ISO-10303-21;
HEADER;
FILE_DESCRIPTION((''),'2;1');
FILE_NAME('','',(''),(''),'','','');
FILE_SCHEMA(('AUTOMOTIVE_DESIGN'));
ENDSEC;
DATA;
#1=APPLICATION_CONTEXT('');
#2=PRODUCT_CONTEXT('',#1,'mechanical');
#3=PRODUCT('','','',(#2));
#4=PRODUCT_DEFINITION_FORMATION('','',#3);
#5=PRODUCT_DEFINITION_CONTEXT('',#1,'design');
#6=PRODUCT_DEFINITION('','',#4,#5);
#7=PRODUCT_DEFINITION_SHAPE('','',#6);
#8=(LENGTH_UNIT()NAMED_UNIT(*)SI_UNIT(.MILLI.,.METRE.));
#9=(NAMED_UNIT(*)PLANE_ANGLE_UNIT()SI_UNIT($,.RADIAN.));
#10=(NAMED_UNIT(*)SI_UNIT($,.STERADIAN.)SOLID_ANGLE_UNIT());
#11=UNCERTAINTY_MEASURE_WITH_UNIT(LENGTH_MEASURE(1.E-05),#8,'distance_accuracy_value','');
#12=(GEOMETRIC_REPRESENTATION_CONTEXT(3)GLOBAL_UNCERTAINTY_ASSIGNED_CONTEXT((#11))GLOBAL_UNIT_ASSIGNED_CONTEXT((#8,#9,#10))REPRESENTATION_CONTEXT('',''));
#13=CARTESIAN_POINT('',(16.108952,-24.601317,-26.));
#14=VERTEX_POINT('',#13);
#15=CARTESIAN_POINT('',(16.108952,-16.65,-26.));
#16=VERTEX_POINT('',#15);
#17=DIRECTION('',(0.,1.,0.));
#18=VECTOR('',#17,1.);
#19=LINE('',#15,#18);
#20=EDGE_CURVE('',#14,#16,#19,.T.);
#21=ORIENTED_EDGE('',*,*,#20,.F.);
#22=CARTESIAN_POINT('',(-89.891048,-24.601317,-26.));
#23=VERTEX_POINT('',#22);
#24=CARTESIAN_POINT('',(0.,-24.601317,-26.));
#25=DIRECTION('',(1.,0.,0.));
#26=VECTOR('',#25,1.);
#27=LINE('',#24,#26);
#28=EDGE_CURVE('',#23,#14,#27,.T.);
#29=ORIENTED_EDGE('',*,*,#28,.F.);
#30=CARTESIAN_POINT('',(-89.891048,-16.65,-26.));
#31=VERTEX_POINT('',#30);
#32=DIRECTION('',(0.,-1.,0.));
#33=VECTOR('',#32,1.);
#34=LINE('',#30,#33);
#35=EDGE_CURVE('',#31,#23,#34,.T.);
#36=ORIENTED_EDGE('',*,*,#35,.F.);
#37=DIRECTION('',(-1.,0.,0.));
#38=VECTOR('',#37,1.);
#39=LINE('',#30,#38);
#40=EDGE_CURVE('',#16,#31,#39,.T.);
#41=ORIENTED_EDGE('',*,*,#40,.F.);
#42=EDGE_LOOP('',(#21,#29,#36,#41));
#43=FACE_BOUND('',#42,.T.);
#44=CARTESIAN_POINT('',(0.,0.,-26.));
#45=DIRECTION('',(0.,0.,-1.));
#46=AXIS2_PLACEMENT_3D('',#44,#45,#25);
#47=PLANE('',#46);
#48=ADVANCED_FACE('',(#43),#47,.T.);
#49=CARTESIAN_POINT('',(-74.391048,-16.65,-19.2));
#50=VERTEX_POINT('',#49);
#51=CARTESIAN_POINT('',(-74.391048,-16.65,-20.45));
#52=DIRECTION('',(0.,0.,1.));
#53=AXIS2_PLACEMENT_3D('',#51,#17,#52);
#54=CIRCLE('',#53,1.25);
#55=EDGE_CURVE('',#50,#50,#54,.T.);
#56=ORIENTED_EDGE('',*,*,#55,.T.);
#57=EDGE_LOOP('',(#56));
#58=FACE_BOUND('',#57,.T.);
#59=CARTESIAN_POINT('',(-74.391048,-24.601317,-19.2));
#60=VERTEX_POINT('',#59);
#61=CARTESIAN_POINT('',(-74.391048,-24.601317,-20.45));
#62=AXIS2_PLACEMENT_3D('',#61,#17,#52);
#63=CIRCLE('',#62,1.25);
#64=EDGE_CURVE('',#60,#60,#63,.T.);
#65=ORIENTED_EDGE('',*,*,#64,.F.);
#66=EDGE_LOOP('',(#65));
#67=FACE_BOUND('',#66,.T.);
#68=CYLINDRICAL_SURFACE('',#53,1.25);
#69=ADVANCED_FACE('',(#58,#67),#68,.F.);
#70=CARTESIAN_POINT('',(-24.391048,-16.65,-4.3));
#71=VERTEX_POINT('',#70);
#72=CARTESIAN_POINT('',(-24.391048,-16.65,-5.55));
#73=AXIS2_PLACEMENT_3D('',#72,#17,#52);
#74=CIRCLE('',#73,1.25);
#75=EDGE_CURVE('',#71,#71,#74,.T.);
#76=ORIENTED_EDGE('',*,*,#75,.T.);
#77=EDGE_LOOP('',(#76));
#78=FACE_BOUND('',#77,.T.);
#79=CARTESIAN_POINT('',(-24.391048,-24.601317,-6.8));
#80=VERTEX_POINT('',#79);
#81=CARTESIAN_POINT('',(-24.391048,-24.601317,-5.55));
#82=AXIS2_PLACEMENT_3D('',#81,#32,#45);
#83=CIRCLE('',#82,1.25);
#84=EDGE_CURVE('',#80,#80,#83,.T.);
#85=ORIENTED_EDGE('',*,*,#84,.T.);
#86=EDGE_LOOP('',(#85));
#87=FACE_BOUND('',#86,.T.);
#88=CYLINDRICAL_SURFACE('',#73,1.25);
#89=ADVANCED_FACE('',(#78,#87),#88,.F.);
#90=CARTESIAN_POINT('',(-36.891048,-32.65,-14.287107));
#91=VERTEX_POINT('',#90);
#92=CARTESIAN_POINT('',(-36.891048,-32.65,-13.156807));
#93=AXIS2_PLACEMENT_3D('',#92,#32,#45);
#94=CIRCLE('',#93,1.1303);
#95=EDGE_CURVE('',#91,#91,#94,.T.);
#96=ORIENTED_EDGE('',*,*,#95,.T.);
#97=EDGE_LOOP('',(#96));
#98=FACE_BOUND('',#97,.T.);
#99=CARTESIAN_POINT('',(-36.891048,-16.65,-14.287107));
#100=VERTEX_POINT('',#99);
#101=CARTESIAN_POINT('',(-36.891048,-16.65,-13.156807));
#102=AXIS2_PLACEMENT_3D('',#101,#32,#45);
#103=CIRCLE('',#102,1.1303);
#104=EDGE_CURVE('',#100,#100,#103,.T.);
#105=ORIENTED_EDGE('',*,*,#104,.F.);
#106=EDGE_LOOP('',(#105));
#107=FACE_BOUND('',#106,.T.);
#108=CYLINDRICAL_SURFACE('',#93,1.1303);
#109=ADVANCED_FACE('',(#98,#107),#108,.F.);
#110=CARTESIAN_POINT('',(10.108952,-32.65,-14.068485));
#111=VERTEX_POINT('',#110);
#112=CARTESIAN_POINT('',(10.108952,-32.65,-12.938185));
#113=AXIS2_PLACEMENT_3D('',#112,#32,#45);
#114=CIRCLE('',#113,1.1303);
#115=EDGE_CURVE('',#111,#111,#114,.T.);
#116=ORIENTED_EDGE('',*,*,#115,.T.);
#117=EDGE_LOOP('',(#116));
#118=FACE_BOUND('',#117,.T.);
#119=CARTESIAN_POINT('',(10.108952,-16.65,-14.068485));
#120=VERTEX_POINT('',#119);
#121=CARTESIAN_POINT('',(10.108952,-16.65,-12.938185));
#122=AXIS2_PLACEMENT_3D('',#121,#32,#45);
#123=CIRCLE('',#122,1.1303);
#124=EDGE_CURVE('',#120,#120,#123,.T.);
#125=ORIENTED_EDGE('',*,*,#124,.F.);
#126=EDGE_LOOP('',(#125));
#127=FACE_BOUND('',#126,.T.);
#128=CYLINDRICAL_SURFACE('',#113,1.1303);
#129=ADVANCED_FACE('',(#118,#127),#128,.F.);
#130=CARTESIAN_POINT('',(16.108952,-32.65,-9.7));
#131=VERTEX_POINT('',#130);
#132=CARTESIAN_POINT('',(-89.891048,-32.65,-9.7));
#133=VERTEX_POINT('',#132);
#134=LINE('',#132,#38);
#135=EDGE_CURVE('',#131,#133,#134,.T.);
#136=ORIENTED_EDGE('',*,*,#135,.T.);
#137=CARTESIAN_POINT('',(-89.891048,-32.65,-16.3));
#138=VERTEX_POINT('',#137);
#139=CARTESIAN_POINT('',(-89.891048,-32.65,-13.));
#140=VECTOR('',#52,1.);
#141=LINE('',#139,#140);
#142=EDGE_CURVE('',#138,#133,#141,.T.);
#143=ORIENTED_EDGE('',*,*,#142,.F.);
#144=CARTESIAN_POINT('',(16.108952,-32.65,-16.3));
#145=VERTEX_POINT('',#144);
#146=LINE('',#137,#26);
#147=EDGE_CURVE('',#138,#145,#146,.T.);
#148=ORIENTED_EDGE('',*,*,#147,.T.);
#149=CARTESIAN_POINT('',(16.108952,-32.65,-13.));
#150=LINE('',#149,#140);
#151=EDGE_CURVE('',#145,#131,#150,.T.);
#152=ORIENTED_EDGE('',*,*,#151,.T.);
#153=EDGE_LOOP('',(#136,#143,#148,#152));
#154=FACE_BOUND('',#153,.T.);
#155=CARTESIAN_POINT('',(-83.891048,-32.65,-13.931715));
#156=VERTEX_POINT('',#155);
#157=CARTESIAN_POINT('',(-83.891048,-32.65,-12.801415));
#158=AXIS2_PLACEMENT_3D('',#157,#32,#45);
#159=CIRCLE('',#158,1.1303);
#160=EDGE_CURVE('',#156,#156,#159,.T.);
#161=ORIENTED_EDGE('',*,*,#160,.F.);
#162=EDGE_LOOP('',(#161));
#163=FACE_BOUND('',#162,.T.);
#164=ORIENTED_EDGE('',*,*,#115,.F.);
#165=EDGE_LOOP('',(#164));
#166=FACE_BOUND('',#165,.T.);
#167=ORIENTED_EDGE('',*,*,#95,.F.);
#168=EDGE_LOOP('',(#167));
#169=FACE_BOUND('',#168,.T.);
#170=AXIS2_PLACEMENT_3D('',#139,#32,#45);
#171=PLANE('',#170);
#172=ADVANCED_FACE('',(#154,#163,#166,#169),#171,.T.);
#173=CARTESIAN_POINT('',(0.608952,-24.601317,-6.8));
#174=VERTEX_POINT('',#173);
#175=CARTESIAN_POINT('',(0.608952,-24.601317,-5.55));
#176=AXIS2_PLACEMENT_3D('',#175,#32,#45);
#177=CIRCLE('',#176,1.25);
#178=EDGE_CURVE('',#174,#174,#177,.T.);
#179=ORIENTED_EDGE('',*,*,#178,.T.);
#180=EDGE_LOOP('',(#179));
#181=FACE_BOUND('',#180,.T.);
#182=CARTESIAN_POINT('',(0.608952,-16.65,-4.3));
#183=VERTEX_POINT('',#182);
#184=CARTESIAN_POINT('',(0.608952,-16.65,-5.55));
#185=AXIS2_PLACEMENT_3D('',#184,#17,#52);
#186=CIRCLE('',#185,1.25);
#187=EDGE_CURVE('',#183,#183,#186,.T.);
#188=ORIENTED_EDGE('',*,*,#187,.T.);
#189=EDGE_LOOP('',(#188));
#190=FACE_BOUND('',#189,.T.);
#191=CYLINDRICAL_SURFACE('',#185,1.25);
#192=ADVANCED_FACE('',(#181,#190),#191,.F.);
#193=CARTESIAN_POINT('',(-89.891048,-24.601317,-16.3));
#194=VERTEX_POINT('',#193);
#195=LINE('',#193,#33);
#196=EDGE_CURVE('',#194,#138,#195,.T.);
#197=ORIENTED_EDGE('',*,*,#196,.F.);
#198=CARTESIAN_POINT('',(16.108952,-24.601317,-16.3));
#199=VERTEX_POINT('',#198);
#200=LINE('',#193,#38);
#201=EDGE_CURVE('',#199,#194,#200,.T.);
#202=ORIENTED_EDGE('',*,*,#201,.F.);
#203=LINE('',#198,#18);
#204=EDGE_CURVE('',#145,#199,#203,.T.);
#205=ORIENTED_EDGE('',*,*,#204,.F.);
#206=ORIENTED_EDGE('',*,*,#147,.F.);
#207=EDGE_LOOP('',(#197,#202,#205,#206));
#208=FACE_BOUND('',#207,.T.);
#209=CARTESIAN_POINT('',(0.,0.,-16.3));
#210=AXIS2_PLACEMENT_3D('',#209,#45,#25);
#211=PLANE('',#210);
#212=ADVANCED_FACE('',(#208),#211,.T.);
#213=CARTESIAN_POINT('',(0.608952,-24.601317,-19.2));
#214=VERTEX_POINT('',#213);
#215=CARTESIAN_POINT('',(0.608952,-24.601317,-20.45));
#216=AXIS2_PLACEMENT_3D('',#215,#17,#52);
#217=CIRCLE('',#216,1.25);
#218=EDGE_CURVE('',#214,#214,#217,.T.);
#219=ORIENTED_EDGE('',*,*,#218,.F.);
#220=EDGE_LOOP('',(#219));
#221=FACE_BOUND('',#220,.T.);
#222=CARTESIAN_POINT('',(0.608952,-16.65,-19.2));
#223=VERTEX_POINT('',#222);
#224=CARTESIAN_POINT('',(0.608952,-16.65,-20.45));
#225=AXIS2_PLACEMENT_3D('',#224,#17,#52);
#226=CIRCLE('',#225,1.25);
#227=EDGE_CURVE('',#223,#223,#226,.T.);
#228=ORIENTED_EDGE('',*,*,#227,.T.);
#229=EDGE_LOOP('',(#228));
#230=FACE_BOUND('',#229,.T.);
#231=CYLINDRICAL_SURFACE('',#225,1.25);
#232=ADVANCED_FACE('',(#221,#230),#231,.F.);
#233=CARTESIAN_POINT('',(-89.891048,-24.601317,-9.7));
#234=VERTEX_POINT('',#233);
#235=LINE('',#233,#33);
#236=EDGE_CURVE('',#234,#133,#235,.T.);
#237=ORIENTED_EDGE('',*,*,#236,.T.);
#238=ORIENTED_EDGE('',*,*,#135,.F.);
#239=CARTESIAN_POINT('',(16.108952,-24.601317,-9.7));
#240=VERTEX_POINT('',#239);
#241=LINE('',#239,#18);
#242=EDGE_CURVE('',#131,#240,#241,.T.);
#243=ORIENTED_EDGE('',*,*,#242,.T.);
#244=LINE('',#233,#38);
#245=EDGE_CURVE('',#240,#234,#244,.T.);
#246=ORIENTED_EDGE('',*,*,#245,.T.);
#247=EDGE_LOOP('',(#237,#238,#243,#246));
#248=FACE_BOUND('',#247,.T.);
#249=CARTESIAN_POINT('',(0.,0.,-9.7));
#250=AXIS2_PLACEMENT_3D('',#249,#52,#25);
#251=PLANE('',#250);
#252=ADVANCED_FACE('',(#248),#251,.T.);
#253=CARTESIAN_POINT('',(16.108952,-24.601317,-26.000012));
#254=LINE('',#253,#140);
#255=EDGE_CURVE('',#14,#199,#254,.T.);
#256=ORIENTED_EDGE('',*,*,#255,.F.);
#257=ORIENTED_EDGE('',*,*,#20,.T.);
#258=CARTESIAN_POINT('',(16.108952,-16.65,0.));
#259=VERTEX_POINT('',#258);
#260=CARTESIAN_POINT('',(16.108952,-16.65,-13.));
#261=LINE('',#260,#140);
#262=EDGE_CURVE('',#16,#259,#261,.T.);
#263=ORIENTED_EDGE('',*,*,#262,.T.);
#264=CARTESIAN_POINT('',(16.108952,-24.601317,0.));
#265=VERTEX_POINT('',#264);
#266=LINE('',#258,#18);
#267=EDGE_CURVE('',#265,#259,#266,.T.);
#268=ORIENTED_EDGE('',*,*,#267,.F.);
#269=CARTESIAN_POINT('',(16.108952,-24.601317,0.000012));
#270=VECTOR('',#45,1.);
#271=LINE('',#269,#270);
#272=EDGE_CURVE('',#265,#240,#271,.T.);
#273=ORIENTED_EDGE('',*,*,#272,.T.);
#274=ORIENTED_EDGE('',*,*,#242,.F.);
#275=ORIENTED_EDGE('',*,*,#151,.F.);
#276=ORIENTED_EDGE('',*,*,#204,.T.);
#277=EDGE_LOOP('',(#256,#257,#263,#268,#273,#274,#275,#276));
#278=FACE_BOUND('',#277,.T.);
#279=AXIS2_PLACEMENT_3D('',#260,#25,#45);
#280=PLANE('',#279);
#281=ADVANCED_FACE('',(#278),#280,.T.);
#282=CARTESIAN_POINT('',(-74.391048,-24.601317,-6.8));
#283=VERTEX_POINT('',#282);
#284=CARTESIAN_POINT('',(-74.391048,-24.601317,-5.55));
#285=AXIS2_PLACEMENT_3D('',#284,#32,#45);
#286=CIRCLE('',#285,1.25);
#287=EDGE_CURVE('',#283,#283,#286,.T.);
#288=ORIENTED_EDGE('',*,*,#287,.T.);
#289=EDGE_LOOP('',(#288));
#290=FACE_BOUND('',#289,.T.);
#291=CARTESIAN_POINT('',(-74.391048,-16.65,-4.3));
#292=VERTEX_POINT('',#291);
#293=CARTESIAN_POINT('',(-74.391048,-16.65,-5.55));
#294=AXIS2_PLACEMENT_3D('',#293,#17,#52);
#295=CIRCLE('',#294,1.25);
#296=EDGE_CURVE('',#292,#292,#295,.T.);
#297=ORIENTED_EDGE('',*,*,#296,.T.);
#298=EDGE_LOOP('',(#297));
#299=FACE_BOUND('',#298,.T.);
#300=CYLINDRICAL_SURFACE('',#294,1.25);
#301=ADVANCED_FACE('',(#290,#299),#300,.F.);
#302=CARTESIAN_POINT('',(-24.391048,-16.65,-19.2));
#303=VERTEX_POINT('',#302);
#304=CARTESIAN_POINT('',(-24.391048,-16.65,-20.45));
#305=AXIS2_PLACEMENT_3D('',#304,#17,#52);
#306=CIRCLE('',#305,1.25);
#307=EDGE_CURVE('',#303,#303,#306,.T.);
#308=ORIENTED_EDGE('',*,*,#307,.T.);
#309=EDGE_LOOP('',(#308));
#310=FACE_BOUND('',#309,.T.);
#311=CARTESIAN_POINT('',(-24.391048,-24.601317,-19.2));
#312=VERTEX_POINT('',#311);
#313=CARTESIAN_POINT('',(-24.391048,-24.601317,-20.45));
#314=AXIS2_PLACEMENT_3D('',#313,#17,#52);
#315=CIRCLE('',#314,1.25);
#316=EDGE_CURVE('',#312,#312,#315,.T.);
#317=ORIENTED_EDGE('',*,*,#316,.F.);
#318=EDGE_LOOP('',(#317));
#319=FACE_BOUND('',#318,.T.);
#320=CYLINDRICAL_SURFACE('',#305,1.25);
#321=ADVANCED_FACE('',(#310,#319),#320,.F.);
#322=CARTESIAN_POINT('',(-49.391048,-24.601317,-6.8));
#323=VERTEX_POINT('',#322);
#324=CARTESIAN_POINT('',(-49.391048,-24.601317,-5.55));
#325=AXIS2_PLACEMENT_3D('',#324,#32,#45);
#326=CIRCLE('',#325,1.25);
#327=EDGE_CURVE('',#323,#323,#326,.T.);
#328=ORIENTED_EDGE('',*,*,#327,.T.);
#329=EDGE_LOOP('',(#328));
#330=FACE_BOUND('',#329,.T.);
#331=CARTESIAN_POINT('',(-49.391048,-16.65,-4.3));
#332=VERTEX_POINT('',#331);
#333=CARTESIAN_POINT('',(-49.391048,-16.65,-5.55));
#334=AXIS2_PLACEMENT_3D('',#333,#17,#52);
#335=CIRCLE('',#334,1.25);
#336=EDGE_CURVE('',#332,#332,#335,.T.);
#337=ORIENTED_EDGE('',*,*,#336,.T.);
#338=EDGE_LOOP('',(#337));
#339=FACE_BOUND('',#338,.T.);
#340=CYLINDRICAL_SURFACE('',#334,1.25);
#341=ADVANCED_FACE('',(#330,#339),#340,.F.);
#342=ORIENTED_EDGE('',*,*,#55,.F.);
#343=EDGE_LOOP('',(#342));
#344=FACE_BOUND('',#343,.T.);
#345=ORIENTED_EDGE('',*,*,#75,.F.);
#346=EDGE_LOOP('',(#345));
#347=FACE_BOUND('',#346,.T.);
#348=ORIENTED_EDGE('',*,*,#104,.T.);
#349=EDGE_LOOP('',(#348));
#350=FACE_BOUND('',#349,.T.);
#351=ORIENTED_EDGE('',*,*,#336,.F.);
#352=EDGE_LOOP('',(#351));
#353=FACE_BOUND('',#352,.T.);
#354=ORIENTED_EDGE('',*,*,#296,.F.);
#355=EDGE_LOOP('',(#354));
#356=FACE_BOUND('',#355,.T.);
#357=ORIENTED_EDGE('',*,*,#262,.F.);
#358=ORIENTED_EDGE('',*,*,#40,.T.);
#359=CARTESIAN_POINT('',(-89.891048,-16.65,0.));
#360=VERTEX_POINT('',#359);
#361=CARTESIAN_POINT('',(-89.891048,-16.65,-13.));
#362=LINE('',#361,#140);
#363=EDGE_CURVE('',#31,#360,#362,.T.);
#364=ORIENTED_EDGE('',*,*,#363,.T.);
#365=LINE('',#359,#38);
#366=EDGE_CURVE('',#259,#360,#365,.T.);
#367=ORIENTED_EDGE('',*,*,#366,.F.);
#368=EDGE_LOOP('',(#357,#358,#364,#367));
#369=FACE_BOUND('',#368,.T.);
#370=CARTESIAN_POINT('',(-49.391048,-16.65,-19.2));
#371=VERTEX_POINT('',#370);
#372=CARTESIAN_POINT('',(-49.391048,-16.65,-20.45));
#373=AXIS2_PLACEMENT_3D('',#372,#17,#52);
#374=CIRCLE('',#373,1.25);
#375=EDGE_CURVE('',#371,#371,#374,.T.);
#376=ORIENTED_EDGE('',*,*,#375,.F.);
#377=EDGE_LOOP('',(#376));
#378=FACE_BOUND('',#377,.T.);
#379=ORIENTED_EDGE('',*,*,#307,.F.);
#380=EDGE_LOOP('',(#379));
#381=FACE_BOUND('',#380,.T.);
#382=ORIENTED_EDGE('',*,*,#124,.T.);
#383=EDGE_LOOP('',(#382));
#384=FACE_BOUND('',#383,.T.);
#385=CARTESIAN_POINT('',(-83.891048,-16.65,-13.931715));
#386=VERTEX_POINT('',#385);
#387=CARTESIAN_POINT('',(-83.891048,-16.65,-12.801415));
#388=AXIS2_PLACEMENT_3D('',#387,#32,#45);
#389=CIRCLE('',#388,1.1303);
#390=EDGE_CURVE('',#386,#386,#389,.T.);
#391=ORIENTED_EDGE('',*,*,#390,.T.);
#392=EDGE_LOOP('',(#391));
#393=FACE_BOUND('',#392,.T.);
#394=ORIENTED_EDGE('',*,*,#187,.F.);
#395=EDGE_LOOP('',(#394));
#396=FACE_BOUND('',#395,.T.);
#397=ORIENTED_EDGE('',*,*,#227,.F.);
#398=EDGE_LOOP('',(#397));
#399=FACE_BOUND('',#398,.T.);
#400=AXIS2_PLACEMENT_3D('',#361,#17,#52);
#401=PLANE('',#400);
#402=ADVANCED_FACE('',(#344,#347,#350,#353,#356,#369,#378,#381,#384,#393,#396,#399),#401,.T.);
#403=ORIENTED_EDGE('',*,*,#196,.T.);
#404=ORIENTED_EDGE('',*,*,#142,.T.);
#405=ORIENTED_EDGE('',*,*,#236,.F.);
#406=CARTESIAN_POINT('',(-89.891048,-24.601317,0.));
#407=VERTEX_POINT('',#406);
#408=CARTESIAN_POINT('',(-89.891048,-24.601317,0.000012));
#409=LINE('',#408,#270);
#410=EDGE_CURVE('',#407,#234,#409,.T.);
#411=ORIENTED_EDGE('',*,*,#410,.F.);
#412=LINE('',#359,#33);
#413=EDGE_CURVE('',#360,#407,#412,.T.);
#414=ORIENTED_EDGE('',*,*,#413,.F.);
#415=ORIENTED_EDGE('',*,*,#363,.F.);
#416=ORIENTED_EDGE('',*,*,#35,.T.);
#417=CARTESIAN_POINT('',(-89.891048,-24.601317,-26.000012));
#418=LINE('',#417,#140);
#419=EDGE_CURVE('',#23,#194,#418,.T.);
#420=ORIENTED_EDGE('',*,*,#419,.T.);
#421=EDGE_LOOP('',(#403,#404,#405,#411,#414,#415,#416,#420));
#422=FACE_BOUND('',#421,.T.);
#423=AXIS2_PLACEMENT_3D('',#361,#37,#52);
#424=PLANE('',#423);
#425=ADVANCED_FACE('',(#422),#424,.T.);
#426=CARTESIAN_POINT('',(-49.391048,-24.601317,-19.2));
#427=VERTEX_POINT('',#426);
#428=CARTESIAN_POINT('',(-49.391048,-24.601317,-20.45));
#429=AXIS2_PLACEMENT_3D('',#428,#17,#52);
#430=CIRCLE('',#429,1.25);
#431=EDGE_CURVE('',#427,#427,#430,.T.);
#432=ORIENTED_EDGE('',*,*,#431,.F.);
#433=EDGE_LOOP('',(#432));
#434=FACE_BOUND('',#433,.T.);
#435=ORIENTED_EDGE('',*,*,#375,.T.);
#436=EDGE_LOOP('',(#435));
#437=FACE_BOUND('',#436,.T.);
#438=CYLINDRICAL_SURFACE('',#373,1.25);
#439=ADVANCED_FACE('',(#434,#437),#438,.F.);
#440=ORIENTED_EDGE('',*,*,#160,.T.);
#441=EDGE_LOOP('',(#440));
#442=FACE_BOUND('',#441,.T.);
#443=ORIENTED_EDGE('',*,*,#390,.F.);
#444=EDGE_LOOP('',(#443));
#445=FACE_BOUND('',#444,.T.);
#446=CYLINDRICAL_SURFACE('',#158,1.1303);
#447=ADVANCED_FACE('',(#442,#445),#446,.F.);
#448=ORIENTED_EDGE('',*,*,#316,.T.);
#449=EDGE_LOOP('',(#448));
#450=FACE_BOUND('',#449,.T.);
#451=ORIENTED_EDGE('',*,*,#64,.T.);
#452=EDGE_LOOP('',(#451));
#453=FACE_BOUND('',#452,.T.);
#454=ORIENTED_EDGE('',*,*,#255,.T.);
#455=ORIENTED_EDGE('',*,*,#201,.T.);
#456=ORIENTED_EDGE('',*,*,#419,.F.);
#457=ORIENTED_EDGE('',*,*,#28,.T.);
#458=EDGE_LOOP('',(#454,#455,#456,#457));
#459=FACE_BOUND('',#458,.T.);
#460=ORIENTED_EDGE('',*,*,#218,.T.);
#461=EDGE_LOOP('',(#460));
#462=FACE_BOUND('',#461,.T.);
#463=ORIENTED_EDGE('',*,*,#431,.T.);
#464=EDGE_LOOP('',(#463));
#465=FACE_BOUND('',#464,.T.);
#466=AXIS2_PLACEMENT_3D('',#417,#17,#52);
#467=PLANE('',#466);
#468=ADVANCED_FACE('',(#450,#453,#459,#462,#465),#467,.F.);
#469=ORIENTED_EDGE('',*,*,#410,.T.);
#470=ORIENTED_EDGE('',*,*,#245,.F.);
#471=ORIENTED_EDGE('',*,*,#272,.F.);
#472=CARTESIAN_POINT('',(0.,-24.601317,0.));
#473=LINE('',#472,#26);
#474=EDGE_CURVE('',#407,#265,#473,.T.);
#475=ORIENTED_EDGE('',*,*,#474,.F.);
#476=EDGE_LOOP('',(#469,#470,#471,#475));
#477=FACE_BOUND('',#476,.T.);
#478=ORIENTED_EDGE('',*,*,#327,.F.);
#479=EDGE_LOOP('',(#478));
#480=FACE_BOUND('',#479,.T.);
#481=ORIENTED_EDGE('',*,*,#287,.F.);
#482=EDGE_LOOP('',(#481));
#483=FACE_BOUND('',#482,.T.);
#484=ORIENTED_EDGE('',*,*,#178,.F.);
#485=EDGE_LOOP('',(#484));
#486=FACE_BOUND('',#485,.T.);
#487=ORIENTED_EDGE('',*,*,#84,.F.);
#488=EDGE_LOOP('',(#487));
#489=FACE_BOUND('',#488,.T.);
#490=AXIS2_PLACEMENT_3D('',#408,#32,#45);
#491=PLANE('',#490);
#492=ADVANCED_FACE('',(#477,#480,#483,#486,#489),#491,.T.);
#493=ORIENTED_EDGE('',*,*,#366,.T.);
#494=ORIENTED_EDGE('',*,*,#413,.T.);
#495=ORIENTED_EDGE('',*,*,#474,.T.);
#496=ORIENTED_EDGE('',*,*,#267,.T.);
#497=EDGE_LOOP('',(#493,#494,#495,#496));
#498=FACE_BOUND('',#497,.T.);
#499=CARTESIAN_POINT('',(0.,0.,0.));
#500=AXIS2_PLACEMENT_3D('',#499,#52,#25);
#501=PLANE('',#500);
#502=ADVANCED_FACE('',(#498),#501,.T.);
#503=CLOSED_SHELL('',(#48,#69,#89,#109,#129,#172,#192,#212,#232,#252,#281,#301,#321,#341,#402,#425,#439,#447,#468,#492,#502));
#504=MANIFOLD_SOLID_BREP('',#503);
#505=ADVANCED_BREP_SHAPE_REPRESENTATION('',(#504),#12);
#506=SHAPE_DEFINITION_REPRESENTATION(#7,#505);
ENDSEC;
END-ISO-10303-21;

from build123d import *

# Parameters (mm, degrees)
SKETCH4_W                       = 106
SKETCH4_H                       = 16
BOSS_EXTRUDE2_DEPTH             = 13
CUT_EXTRUDE3_START              = -9.7
SKETCH25_W                      = 106
SKETCH25_H                      = 8.1
CUT_EXTRUDE3_DEPTH              = 107.216438698
M3X0_5_TAPPED_HOLE1_D           = 2.5
MIRROR1_START                   = -24.601316976
MIRROR1_OUTLINE_W               = 106
MIRROR1_OUTLINE_H               = 13
MIRROR1_OUTLINE_R               = 1.25
MIRROR1_DEPTH                   = 7.951316976
MIRROR1_START_2                 = -32.65
MIRROR1_2_OUTLINE_W             = 106
MIRROR1_2_OUTLINE_H             = 3.3
MIRROR1_2_DEPTH                 = 8.048683024
F_4_40_TAPPED_HOLE1_D           = 2.2606
F_4_40_TAPPED_HOLE1_ON_FACE_2_D = 2.2606


# Read off the part's stored shape, not the designer's step: Mirror1
with BuildPart() as part:
    # Sketch4 → Boss-Extrude2 (new body)
    with BuildSketch(Plane.XY):
        with Locations((-36.891047602, -24.65)):
            Rectangle(SKETCH4_W, SKETCH4_H)
    extrude(amount=-BOSS_EXTRUDE2_DEPTH)

    # Sketch25 → Cut-Extrude3 (cut)
    with BuildSketch(Plane.XY.offset(CUT_EXTRUDE3_START)):
        with Locations((-36.891047602, -28.651316976)):
            Rectangle(SKETCH25_W, SKETCH25_H)
    extrude(amount=CUT_EXTRUDE3_DEPTH, mode=Mode.SUBTRACT)

    # M3x0.5 Tapped Hole1 (through all)
    with Locations(Plane(origin=(-74.391047602, -16.65, -5.55), x_dir=(0, 0, 1), z_dir=(0, 1, 0))):
        with Locations((0, 0), (0, 25), (0, 75), (0, 50)):
            Hole(M3X0_5_TAPPED_HOLE1_D / 2)

    # Mirror1 outline → Mirror1 (add)
    with BuildSketch(Plane(origin=(0, 0, 0), x_dir=(1, 0, 0), z_dir=(0, 1, 0)).offset(MIRROR1_START)):
        with Locations((-36.891047602, 19.5)):
            Rectangle(MIRROR1_OUTLINE_W, MIRROR1_OUTLINE_H)
        with Locations((-74.391047602, 20.45)):
            Circle(MIRROR1_OUTLINE_R, mode=Mode.SUBTRACT)
        with Locations((-49.391047602, 20.45)):
            Circle(MIRROR1_OUTLINE_R, mode=Mode.SUBTRACT)
        with Locations((-24.391047602, 20.45)):
            Circle(MIRROR1_OUTLINE_R, mode=Mode.SUBTRACT)
        with Locations((0.608952398, 20.45)):
            Circle(MIRROR1_OUTLINE_R, mode=Mode.SUBTRACT)
    extrude(amount=MIRROR1_DEPTH)

    # Mirror1 2 outline → Mirror1 2 (add)
    with BuildSketch(Plane(origin=(0, 0, 0), x_dir=(1, 0, 0), z_dir=(0, 1, 0)).offset(MIRROR1_START_2)):
        with Locations((-36.891047602, 14.65)):
            Rectangle(MIRROR1_2_OUTLINE_W, MIRROR1_2_OUTLINE_H)
    extrude(amount=MIRROR1_2_DEPTH)

    # #4-40 Tapped Hole1 (through all)
    with Locations(Plane(origin=(-83.891047602, -32.65, -12.801414568), x_dir=(0, 0, -1), z_dir=(0, -1, 0))):
        with Locations((0, 0), (0.13677014, 94), (0.355392609, 47)):
            Hole(F_4_40_TAPPED_HOLE1_D / 2)

    # #4-40 Tapped Hole1 on face 2 (through all)
    with Locations(Plane(origin=(-13.707536503, 0, 46.33240541), x_dir=(0, 0, -1), z_dir=(0, -1, 0))):
        with Locations((0, 0)):
            Hole(F_4_40_TAPPED_HOLE1_ON_FACE_2_D / 2)


solid = part.part
